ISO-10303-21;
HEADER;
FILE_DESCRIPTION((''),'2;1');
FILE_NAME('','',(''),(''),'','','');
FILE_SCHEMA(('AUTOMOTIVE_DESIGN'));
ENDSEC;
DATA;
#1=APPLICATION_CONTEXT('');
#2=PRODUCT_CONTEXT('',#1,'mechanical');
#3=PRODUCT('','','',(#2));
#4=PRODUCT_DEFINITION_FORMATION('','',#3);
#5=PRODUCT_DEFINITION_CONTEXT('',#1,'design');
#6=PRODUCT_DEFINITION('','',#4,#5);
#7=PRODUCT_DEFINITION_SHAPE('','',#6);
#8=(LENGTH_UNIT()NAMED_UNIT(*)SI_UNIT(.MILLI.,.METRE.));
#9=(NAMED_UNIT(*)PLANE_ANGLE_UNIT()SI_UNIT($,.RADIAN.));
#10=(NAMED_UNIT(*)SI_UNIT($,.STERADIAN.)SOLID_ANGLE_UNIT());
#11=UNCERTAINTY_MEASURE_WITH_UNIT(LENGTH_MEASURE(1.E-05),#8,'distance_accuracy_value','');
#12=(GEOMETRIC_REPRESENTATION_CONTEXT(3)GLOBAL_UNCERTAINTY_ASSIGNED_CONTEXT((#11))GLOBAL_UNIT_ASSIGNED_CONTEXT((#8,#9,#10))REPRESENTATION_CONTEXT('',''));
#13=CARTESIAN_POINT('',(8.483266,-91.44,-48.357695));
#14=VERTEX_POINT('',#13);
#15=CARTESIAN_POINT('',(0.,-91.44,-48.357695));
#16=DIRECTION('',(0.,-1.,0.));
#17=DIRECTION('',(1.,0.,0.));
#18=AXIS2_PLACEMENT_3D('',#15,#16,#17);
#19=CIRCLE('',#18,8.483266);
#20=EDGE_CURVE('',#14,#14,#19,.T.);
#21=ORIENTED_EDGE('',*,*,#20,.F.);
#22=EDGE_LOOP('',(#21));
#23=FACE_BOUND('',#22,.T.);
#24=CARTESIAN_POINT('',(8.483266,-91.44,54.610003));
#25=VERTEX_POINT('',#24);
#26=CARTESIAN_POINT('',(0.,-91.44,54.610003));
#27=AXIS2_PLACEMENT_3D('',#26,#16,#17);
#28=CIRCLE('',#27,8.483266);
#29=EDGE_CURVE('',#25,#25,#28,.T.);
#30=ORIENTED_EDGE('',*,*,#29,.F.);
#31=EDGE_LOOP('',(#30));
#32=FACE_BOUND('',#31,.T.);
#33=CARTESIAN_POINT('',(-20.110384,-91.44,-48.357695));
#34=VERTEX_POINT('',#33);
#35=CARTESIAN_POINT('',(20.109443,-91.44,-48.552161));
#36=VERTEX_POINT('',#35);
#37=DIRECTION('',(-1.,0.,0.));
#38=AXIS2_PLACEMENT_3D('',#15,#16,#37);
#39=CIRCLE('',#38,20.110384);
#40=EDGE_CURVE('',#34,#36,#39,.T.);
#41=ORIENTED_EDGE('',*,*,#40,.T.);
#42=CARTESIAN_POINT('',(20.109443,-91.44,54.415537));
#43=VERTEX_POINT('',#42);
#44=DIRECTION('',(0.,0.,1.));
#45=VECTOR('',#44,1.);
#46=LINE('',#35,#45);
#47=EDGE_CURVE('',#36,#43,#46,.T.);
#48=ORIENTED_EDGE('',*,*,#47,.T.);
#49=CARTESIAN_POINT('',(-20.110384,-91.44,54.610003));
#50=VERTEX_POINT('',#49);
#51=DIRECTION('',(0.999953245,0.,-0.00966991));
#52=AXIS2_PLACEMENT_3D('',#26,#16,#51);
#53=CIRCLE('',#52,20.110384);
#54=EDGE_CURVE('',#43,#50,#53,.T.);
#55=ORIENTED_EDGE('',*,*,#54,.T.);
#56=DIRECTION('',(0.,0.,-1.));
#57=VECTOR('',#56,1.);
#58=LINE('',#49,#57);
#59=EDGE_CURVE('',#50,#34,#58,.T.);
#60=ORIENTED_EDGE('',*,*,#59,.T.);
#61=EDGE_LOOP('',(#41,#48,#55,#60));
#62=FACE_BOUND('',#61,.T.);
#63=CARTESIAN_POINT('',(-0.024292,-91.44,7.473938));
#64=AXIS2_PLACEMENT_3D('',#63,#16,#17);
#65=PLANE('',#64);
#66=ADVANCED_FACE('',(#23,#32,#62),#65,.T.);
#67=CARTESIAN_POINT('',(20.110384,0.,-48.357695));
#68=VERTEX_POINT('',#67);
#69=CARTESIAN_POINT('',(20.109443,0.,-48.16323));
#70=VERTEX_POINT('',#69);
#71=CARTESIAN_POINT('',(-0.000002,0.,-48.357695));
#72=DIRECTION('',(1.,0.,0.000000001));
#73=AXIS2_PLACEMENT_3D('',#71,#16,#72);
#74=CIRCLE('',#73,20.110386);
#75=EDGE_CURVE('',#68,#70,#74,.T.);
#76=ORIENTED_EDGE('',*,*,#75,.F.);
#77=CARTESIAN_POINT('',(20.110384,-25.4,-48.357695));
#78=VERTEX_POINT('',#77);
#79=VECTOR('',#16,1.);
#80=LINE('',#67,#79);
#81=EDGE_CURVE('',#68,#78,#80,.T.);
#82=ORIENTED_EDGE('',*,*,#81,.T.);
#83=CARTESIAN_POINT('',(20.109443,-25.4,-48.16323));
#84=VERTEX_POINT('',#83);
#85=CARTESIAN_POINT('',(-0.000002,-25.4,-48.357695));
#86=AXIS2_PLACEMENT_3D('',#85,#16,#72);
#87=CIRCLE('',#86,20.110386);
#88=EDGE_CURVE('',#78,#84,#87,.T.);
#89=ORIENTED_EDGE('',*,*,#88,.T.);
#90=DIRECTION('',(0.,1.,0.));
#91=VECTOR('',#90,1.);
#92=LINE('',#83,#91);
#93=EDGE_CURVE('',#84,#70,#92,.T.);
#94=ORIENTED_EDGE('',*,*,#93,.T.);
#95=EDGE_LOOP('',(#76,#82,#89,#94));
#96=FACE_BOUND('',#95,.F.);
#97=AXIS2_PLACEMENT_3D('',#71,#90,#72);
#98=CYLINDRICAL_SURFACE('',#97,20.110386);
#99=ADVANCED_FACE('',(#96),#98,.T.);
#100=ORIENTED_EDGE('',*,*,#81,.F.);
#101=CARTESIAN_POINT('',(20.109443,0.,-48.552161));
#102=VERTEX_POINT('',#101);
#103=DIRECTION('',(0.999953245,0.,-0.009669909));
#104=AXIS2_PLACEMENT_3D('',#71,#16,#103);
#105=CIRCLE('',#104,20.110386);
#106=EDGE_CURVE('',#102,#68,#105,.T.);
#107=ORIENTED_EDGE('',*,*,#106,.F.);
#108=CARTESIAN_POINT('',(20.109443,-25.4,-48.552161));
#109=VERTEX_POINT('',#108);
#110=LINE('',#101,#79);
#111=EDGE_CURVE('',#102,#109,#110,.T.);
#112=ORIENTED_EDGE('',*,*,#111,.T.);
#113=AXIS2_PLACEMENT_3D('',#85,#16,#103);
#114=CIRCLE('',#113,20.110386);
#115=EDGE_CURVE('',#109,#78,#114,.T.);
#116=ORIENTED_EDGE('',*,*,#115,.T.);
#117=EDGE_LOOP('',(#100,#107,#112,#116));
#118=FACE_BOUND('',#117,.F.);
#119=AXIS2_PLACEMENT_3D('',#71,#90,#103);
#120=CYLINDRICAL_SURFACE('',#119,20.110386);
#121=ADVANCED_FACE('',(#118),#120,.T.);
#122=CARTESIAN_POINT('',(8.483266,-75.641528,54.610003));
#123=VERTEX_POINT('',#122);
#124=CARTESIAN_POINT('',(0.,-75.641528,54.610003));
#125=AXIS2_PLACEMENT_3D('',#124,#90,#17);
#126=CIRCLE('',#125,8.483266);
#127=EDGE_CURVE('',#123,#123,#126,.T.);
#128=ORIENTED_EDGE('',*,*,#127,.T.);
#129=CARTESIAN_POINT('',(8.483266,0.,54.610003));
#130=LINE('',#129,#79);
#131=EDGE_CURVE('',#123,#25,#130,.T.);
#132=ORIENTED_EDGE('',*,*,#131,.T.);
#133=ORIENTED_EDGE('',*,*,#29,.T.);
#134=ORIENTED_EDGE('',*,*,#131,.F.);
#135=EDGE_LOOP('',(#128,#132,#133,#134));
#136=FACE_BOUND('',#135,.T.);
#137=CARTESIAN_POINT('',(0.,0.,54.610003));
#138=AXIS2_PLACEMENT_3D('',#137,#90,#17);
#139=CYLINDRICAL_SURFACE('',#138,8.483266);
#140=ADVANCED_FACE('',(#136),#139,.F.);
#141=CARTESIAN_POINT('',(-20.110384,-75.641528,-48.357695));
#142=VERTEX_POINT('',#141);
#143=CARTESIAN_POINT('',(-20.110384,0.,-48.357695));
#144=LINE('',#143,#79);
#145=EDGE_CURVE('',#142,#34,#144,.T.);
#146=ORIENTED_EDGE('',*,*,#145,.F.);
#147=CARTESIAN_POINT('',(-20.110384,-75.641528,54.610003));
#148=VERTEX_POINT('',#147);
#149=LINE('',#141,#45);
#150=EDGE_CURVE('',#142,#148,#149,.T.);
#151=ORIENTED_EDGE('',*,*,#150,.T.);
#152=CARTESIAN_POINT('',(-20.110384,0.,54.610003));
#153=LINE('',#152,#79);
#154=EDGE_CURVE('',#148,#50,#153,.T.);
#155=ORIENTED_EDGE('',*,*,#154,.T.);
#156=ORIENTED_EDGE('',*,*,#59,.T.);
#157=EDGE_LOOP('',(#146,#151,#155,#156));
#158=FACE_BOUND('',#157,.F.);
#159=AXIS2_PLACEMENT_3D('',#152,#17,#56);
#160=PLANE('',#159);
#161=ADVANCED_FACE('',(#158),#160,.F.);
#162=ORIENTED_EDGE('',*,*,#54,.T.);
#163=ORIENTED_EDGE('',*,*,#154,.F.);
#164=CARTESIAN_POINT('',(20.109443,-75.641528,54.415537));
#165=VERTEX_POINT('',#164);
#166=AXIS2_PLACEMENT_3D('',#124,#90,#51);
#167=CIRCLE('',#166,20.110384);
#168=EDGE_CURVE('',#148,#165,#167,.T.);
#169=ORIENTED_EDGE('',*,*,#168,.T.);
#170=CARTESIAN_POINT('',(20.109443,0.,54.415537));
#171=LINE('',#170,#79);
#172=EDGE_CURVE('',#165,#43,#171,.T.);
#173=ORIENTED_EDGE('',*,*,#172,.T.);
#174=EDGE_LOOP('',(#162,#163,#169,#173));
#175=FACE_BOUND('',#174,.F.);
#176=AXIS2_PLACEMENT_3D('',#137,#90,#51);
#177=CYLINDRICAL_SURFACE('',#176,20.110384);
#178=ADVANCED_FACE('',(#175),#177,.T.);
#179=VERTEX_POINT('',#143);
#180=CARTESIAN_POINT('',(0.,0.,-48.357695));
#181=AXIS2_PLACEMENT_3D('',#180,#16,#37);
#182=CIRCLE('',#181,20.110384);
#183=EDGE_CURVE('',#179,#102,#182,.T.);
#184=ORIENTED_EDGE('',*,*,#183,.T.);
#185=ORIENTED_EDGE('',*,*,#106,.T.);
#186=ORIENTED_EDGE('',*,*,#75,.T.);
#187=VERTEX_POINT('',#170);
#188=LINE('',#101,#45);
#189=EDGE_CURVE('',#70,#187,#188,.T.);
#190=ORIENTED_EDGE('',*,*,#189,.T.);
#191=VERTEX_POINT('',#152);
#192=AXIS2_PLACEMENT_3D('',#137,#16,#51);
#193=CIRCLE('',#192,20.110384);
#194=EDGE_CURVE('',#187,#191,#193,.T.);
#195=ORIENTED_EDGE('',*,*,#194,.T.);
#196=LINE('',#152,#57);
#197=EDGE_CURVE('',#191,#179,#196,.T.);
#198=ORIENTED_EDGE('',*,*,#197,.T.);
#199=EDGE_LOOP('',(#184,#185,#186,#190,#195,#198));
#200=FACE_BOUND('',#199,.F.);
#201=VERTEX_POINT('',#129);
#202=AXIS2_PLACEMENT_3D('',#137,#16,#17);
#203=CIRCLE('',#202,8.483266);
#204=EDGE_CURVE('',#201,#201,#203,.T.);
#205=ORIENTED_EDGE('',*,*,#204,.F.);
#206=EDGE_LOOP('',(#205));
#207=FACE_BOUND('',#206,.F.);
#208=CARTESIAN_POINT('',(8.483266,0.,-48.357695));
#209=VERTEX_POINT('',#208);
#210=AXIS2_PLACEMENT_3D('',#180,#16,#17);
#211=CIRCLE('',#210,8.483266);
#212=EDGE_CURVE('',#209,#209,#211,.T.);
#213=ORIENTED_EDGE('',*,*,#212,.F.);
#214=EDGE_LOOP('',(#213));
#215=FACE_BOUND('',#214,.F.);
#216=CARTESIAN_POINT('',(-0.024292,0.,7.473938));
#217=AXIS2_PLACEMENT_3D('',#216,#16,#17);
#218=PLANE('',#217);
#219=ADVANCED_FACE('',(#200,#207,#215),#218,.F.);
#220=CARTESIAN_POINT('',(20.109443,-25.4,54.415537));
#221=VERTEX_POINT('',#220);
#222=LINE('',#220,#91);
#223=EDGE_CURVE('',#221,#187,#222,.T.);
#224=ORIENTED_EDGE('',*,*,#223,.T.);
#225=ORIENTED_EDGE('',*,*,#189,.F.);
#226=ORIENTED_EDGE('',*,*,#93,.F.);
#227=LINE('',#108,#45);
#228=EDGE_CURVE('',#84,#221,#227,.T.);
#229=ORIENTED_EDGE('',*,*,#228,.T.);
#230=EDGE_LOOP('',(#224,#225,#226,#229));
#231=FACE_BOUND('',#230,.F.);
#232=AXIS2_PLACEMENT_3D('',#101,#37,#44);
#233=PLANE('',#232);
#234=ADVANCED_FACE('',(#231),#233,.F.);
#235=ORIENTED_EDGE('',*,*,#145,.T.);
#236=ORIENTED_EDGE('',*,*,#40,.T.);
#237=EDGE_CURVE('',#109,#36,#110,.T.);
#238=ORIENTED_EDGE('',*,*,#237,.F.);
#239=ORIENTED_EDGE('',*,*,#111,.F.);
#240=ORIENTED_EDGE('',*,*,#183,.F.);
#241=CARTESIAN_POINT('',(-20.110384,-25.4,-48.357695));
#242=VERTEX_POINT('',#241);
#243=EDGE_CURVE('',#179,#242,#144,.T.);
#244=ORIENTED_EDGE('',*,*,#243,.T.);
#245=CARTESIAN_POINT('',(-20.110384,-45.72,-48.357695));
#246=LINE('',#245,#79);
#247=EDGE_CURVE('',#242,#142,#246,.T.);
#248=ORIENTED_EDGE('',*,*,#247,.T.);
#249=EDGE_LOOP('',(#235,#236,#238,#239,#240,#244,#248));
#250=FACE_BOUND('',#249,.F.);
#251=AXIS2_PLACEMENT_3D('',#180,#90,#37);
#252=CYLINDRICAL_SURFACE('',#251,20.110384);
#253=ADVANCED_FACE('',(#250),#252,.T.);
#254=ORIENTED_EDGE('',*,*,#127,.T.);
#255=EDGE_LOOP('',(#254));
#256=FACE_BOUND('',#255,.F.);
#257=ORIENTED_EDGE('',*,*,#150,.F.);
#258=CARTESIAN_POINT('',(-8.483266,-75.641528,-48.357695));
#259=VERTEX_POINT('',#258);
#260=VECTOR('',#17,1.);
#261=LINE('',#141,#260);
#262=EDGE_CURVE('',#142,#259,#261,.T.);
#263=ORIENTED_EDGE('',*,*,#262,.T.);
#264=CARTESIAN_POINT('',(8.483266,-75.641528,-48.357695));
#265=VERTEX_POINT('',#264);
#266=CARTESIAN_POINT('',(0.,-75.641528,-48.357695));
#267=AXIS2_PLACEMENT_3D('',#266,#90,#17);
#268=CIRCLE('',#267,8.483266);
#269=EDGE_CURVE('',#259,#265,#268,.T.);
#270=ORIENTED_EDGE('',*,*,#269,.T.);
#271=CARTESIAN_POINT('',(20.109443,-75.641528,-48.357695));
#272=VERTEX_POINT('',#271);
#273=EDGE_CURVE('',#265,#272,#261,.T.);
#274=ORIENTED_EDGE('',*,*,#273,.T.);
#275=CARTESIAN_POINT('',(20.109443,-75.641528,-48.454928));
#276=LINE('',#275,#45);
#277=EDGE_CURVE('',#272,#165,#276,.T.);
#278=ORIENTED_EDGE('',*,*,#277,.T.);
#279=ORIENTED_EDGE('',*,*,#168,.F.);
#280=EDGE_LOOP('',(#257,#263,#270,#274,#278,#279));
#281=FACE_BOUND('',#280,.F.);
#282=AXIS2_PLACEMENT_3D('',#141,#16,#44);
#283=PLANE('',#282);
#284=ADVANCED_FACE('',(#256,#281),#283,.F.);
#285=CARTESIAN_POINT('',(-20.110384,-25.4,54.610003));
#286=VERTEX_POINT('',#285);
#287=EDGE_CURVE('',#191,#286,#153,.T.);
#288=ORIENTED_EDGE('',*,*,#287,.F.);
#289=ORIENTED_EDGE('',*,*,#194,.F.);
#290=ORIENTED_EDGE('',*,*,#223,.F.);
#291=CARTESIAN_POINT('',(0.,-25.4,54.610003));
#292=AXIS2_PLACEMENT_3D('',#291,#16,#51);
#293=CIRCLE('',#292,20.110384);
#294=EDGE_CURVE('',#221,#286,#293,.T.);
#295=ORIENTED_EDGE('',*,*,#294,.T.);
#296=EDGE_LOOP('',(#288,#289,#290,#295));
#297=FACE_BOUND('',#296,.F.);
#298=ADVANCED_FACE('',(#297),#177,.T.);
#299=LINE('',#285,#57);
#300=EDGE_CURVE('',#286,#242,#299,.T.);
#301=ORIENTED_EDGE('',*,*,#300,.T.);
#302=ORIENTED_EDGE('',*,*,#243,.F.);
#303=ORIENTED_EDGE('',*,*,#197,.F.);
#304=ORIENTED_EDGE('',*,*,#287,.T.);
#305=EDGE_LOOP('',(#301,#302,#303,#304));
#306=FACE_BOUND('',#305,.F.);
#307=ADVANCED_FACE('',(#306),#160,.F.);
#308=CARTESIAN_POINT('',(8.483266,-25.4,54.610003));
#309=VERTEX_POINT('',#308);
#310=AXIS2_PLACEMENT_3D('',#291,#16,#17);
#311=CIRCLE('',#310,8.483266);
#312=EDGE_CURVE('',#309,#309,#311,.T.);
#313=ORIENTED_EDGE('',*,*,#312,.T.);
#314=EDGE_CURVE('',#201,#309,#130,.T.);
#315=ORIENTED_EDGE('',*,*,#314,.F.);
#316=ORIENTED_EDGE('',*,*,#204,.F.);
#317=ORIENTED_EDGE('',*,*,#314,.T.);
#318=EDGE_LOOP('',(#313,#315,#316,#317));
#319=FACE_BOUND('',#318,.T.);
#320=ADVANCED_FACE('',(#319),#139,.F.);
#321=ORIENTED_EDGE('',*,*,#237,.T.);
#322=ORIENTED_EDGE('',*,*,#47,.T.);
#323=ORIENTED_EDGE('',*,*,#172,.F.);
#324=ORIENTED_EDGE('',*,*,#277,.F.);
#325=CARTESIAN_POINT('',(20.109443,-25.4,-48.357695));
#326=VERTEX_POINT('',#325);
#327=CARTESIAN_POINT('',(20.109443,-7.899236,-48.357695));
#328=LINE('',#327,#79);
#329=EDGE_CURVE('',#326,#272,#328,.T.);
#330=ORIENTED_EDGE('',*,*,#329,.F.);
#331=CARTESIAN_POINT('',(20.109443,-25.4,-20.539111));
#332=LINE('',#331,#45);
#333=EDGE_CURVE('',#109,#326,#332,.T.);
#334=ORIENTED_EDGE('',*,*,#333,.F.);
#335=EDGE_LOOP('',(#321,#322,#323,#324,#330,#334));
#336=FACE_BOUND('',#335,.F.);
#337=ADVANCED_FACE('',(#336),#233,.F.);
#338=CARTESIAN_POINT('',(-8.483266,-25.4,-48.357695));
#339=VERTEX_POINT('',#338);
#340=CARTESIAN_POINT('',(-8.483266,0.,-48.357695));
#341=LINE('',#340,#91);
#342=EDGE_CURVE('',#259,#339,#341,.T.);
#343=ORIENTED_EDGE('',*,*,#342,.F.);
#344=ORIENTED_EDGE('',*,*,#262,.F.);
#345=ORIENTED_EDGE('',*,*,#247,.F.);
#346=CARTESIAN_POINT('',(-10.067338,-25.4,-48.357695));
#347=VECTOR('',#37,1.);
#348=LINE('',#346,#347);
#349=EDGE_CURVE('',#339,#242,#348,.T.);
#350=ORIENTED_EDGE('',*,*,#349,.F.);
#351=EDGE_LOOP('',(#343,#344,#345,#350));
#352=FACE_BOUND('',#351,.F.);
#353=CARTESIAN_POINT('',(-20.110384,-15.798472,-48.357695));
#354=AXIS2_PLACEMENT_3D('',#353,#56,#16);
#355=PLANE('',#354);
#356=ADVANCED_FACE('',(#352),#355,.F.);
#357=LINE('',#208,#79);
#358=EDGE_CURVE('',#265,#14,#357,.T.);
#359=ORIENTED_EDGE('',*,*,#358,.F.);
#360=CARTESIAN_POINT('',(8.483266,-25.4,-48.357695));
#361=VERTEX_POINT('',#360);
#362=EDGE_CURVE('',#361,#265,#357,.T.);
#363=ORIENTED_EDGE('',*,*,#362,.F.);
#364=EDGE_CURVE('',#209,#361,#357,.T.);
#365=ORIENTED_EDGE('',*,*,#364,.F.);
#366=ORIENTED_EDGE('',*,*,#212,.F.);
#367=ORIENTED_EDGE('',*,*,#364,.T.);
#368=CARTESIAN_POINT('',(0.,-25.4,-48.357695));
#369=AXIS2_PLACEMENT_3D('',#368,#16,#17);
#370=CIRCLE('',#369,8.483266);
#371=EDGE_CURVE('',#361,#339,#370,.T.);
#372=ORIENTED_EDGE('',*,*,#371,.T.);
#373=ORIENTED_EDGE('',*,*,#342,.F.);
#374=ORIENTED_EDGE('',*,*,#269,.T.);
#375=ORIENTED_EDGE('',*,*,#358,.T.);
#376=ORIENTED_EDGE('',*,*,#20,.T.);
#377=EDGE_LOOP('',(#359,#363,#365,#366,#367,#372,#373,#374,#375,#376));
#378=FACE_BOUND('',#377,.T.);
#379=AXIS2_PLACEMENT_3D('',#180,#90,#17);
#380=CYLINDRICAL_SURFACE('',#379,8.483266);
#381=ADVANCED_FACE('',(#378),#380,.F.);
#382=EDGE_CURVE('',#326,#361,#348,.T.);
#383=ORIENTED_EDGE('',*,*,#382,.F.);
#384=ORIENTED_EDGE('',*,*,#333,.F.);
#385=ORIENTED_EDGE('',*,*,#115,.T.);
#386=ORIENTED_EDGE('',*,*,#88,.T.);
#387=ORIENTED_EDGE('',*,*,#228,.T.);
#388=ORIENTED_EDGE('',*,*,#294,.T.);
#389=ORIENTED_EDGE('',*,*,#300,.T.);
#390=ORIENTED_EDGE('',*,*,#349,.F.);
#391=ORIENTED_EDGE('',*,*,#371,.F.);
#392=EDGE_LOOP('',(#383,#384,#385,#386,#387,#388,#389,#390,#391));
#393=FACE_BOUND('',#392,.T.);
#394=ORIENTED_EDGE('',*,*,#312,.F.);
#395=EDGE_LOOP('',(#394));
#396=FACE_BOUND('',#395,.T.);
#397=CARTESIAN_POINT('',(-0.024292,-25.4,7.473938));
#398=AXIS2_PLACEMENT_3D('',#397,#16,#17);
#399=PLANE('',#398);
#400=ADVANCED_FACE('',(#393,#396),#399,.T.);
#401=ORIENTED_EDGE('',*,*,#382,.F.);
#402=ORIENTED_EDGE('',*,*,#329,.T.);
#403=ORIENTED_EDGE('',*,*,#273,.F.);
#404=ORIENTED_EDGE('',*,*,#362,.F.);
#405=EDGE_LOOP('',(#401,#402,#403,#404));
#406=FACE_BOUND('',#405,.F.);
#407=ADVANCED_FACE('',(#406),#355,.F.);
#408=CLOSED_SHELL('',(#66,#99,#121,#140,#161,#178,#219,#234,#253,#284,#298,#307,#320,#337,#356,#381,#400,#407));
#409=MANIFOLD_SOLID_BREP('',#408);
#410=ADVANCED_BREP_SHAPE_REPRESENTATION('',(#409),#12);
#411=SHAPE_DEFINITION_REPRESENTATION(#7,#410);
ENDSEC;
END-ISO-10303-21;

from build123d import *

# Parameters (mm, degrees)
F0_R     = 8.4832662773
F1_DEPTH = 91.44
F2_W     = 59.8430555439
F2_H     = 102.967698127
F3_DEPTH = 57.658
F4_DEPTH = 25.4


# Not quite as in the source:
# - the program builds the solid bodies; features that only make, move or delete a surface that nothing else refers to are left out


with BuildPart() as f1:
    # F0 (on Front) → F1 (new body)
    with BuildSketch(Plane.XZ):
        with BuildLine():
            Line((20.1094433592, -48.163229742), (20.1094433592, 54.4155371868))
            ThreePointArc((20.1094433592, 54.4155371868), (0.0972339361, 74.7201513345), (-20.1103836136, 54.6100027859))
            Line((-20.1103836136, 54.6100027859), (-20.1103836136, -48.3576953411))
            ThreePointArc((-20.1103836136, -48.3576953411), (-0.0972339361, -28.2475467925), (20.1094433592, -48.163229742))
        make_face()
        with Locations((0, 54.6100027859)):
            Circle(F0_R, mode=Mode.SUBTRACT)
        with BuildLine():
            Line((20.1094433592, -48.5521609402), (20.1094433592, -48.163229742))
            ThreePointArc((20.1094433592, -48.163229742), (-0.0972339361, -28.2475467925), (-20.1103836136, -48.3576953411))
            ThreePointArc((-20.1103836136, -48.3576953411), (-0.0972339361, -68.4678438897), (20.1094433592, -48.5521609402))
        make_face()
        with Locations((0, -48.3576953411)):
            Circle(F0_R, mode=Mode.SUBTRACT)
    extrude(amount=F1_DEPTH)

    # F2 (on face) → F3 (cut)
    with BuildSketch(Plane(origin=(-20.1103836136, 0, 0), x_dir=(0, -1, 0), z_dir=(-1, 0, 0))):
        with Locations((45.72, 106.0938518494)):
            Rectangle(F2_W, F2_H)
        with Locations((45.72, 3.1261537224)):
            Rectangle(F2_W, F2_H)
    extrude(amount=-F3_DEPTH, mode=Mode.SUBTRACT)

    # F0 (on Front) → F4 (join)
    with BuildSketch(Plane.XZ):
        with BuildLine():
            Line((20.1094433592, -48.163229742), (20.1094433592, 54.4155371868))
            ThreePointArc((20.1094433592, 54.4155371868), (0.0972339361, 74.7201513345), (-20.1103836136, 54.6100027859))
            Line((-20.1103836136, 54.6100027859), (-20.1103836136, -48.3576953411))
            ThreePointArc((-20.1103836136, -48.3576953411), (-0.0972339361, -28.2475467925), (20.1094433592, -48.163229742))
        make_face()
        with Locations((0, 54.6100027859)):
            Circle(F0_R, mode=Mode.SUBTRACT)
        with BuildLine():
            Line((20.1094433592, -48.5521609402), (20.1094433592, -48.163229742))
            ThreePointArc((20.1094433592, -48.163229742), (-0.0972339361, -28.2475467925), (-20.1103836136, -48.3576953411))
            ThreePointArc((-20.1103836136, -48.3576953411), (-0.0972339361, -68.4678438897), (20.1094433592, -48.5521609402))
        make_face()
        with Locations((0, -48.3576953411)):
            Circle(F0_R, mode=Mode.SUBTRACT)
        with BuildLine():
            ThreePointArc((20.1103836136, -48.3576953411), (20.1101485486, -48.260461405), (20.1094433592, -48.163229742))
            Line((20.1094433592, -48.163229742), (20.1094433592, -48.5521609402))
            ThreePointArc((20.1094433592, -48.5521609402), (20.1101485486, -48.4549292772), (20.1103836136, -48.3576953411))
        make_face()
    extrude(amount=F4_DEPTH)


solid = f1.part
